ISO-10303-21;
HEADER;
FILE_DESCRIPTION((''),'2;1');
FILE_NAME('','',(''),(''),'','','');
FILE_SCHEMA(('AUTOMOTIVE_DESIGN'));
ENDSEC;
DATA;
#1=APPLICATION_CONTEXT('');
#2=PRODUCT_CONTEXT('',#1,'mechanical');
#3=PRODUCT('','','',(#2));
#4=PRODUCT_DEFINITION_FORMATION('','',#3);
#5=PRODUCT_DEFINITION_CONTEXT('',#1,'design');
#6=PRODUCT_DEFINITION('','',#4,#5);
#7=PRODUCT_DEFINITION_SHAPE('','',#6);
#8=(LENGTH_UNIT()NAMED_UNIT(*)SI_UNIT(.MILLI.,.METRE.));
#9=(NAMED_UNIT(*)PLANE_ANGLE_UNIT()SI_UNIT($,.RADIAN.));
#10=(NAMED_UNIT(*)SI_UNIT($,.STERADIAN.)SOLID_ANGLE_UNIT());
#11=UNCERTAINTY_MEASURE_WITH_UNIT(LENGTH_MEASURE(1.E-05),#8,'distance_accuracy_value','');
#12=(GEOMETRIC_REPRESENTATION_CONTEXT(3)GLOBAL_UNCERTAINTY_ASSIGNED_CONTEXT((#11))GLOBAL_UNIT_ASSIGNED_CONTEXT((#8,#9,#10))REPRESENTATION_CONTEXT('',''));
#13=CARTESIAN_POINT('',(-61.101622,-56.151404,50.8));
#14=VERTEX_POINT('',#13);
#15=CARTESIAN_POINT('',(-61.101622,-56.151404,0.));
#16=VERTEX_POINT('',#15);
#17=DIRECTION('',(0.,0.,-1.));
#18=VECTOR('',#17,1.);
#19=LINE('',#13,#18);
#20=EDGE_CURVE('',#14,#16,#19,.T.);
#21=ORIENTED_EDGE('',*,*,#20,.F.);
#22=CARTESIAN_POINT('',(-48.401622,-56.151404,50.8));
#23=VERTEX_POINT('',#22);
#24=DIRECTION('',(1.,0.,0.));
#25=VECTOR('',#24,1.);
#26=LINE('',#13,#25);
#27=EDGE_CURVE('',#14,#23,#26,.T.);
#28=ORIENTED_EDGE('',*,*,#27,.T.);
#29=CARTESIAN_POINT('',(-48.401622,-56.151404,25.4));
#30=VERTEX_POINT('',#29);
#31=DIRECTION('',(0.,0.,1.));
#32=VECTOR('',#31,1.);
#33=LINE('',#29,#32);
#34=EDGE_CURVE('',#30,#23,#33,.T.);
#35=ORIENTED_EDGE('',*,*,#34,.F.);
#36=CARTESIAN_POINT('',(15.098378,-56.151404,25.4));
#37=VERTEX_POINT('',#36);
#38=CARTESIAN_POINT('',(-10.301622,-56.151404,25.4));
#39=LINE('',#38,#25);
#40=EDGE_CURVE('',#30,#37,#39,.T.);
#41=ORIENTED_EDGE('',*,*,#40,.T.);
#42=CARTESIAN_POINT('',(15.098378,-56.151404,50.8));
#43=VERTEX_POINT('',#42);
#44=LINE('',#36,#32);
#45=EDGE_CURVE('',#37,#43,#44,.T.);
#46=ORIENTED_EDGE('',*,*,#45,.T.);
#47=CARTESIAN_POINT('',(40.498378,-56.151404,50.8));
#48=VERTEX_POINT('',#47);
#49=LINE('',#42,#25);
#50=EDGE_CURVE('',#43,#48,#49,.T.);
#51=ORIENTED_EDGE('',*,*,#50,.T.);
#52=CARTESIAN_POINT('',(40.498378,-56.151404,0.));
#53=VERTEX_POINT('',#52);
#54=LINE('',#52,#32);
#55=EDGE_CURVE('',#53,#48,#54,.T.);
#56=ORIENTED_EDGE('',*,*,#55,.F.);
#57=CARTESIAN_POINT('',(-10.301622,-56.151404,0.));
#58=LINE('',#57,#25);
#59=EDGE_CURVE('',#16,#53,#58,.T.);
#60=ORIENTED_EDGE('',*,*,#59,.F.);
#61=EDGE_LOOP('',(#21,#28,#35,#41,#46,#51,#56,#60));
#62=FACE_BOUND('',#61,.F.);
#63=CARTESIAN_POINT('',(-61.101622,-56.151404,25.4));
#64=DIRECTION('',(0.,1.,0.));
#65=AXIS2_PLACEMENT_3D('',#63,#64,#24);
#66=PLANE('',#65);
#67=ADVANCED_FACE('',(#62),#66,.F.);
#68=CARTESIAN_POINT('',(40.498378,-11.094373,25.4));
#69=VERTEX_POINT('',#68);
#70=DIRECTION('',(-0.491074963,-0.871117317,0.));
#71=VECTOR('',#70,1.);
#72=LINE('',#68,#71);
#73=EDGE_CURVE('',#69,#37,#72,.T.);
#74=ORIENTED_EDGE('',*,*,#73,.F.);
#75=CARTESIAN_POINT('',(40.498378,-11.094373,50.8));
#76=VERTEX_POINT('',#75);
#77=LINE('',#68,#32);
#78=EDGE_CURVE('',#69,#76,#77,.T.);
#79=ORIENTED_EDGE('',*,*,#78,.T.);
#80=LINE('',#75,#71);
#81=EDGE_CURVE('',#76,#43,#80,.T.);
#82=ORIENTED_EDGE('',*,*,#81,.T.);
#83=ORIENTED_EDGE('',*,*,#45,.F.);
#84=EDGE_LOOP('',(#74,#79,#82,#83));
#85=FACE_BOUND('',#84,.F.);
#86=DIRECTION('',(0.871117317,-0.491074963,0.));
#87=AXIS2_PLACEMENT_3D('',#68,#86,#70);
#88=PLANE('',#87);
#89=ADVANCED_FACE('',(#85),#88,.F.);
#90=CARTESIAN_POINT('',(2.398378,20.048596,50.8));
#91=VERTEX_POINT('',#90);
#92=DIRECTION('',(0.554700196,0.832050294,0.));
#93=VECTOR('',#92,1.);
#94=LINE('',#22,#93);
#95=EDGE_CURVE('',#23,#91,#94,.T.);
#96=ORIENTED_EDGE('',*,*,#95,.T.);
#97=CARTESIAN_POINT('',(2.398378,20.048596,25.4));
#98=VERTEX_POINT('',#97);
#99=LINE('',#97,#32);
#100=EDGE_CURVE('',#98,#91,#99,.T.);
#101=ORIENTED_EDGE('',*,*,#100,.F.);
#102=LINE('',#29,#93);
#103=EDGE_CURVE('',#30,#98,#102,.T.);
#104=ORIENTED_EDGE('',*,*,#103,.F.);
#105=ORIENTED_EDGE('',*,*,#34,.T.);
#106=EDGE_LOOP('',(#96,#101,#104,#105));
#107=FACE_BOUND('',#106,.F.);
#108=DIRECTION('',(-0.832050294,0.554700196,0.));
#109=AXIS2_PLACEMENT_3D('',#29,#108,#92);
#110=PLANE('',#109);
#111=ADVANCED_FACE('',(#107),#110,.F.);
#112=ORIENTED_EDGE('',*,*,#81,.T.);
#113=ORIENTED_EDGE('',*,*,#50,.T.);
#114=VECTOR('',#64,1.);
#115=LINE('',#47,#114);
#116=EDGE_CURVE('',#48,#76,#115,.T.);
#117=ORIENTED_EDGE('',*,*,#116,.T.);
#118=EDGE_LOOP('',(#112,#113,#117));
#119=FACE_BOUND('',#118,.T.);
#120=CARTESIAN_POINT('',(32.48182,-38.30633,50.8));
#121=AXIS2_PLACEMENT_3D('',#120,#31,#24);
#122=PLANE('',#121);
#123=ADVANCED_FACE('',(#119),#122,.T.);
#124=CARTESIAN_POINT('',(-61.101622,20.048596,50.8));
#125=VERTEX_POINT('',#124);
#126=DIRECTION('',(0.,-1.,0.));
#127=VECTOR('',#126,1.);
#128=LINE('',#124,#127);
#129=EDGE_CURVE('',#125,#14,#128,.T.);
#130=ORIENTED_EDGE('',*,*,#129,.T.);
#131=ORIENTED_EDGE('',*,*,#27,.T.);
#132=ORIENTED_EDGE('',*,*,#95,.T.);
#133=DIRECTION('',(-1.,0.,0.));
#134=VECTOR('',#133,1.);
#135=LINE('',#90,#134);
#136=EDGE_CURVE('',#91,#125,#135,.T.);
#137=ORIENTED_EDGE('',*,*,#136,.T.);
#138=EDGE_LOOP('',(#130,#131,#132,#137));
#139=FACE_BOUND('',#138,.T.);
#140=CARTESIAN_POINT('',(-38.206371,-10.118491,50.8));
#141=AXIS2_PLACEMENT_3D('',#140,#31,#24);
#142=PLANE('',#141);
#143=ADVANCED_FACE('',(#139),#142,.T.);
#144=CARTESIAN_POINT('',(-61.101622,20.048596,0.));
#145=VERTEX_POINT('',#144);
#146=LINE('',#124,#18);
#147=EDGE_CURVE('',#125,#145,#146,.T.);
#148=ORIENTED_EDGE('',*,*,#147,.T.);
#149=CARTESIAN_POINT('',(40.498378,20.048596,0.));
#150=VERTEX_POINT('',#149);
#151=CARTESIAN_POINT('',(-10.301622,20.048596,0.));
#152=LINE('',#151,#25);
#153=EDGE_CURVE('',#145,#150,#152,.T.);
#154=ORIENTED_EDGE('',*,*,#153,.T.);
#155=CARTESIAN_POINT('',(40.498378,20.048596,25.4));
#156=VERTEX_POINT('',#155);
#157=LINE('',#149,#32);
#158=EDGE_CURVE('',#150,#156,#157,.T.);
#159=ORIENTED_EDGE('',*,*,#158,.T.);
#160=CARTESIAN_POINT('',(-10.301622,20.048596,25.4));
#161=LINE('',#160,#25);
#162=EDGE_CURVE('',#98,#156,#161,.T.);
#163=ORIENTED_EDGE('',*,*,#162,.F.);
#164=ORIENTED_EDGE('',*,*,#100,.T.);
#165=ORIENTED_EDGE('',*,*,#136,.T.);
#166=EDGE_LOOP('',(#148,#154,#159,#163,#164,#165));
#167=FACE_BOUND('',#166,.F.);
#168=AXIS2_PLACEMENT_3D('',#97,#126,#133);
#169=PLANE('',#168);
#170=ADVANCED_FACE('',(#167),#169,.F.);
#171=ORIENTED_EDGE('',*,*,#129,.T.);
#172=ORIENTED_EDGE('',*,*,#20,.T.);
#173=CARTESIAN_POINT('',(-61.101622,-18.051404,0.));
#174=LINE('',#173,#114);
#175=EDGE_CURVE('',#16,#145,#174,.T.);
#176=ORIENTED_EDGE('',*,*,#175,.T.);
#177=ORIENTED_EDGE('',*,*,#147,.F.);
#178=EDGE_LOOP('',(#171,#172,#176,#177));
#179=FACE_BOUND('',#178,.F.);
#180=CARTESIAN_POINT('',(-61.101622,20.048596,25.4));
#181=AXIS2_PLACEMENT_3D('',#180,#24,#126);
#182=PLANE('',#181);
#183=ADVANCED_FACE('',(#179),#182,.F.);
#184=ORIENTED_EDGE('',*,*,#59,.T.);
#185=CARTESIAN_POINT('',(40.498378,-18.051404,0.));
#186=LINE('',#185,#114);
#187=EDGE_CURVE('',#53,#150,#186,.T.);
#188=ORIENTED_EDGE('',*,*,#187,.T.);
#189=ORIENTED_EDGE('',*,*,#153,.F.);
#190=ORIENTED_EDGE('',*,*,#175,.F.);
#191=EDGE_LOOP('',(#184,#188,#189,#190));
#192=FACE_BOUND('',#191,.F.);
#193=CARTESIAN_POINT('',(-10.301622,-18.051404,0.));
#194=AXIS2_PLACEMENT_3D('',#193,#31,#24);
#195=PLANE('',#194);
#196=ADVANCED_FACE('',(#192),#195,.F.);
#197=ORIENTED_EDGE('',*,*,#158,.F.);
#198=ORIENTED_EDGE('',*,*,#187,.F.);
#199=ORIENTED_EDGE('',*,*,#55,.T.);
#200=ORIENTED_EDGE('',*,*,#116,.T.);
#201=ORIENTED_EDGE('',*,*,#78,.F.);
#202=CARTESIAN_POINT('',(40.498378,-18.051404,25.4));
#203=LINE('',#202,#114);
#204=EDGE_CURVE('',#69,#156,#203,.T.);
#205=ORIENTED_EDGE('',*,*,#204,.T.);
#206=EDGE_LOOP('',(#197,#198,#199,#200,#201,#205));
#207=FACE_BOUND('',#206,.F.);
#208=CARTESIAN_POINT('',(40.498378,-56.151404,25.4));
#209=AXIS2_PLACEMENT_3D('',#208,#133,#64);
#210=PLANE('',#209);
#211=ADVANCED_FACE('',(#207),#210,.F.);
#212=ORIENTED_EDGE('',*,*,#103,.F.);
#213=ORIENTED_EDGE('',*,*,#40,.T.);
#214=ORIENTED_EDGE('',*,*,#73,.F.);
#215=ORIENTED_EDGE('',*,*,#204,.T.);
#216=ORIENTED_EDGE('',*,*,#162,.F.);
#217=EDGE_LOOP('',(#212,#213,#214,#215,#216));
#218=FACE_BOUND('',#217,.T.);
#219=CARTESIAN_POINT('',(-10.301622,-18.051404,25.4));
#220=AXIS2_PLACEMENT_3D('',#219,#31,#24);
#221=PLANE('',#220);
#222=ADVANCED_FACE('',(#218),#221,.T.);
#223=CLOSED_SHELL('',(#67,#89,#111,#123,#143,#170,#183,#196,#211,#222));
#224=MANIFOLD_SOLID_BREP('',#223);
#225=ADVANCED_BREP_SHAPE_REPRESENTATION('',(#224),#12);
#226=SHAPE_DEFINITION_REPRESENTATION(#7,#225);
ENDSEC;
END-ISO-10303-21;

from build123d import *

# Parameters (mm, degrees)
F0_W     = 101.6
F0_H     = 76.2
F1_DEPTH = 25.4
F5_DEPTH = 25.4
F8_DEPTH = 25.4


# Not quite as in the source:
# - a feature of the source that left no trace in its solid (it failed there, or was rolled back) is left out


with BuildPart() as f1:
    # F0 (on Top) → F1 (new body)
    with BuildSketch(Plane.XY):
        with Locations((-10.3016215888, -18.0514037281)):
            Rectangle(F0_W, F0_H)
    extrude(amount=F1_DEPTH)

    # F4 (on face) → F5 (join)
    with BuildSketch(Plane.XY.offset(25.4)):
        Polygon((15.0983784112, -56.1514037281), (40.4983784112, -56.1514037281), (40.4983784112, -11.0943727195), align=None)
    extrude(amount=F5_DEPTH)

    # F7 (on face) → F8 (join)
    with BuildSketch(Plane.XY.offset(25.4)):
        Polygon((-61.1016215888, -56.1514037281), (-48.4016215888, -56.1514037281), (2.3983784112, 20.0485962719), (-61.1016215888, 20.0485962719), align=None)
    extrude(amount=F8_DEPTH)


solid = f1.part
